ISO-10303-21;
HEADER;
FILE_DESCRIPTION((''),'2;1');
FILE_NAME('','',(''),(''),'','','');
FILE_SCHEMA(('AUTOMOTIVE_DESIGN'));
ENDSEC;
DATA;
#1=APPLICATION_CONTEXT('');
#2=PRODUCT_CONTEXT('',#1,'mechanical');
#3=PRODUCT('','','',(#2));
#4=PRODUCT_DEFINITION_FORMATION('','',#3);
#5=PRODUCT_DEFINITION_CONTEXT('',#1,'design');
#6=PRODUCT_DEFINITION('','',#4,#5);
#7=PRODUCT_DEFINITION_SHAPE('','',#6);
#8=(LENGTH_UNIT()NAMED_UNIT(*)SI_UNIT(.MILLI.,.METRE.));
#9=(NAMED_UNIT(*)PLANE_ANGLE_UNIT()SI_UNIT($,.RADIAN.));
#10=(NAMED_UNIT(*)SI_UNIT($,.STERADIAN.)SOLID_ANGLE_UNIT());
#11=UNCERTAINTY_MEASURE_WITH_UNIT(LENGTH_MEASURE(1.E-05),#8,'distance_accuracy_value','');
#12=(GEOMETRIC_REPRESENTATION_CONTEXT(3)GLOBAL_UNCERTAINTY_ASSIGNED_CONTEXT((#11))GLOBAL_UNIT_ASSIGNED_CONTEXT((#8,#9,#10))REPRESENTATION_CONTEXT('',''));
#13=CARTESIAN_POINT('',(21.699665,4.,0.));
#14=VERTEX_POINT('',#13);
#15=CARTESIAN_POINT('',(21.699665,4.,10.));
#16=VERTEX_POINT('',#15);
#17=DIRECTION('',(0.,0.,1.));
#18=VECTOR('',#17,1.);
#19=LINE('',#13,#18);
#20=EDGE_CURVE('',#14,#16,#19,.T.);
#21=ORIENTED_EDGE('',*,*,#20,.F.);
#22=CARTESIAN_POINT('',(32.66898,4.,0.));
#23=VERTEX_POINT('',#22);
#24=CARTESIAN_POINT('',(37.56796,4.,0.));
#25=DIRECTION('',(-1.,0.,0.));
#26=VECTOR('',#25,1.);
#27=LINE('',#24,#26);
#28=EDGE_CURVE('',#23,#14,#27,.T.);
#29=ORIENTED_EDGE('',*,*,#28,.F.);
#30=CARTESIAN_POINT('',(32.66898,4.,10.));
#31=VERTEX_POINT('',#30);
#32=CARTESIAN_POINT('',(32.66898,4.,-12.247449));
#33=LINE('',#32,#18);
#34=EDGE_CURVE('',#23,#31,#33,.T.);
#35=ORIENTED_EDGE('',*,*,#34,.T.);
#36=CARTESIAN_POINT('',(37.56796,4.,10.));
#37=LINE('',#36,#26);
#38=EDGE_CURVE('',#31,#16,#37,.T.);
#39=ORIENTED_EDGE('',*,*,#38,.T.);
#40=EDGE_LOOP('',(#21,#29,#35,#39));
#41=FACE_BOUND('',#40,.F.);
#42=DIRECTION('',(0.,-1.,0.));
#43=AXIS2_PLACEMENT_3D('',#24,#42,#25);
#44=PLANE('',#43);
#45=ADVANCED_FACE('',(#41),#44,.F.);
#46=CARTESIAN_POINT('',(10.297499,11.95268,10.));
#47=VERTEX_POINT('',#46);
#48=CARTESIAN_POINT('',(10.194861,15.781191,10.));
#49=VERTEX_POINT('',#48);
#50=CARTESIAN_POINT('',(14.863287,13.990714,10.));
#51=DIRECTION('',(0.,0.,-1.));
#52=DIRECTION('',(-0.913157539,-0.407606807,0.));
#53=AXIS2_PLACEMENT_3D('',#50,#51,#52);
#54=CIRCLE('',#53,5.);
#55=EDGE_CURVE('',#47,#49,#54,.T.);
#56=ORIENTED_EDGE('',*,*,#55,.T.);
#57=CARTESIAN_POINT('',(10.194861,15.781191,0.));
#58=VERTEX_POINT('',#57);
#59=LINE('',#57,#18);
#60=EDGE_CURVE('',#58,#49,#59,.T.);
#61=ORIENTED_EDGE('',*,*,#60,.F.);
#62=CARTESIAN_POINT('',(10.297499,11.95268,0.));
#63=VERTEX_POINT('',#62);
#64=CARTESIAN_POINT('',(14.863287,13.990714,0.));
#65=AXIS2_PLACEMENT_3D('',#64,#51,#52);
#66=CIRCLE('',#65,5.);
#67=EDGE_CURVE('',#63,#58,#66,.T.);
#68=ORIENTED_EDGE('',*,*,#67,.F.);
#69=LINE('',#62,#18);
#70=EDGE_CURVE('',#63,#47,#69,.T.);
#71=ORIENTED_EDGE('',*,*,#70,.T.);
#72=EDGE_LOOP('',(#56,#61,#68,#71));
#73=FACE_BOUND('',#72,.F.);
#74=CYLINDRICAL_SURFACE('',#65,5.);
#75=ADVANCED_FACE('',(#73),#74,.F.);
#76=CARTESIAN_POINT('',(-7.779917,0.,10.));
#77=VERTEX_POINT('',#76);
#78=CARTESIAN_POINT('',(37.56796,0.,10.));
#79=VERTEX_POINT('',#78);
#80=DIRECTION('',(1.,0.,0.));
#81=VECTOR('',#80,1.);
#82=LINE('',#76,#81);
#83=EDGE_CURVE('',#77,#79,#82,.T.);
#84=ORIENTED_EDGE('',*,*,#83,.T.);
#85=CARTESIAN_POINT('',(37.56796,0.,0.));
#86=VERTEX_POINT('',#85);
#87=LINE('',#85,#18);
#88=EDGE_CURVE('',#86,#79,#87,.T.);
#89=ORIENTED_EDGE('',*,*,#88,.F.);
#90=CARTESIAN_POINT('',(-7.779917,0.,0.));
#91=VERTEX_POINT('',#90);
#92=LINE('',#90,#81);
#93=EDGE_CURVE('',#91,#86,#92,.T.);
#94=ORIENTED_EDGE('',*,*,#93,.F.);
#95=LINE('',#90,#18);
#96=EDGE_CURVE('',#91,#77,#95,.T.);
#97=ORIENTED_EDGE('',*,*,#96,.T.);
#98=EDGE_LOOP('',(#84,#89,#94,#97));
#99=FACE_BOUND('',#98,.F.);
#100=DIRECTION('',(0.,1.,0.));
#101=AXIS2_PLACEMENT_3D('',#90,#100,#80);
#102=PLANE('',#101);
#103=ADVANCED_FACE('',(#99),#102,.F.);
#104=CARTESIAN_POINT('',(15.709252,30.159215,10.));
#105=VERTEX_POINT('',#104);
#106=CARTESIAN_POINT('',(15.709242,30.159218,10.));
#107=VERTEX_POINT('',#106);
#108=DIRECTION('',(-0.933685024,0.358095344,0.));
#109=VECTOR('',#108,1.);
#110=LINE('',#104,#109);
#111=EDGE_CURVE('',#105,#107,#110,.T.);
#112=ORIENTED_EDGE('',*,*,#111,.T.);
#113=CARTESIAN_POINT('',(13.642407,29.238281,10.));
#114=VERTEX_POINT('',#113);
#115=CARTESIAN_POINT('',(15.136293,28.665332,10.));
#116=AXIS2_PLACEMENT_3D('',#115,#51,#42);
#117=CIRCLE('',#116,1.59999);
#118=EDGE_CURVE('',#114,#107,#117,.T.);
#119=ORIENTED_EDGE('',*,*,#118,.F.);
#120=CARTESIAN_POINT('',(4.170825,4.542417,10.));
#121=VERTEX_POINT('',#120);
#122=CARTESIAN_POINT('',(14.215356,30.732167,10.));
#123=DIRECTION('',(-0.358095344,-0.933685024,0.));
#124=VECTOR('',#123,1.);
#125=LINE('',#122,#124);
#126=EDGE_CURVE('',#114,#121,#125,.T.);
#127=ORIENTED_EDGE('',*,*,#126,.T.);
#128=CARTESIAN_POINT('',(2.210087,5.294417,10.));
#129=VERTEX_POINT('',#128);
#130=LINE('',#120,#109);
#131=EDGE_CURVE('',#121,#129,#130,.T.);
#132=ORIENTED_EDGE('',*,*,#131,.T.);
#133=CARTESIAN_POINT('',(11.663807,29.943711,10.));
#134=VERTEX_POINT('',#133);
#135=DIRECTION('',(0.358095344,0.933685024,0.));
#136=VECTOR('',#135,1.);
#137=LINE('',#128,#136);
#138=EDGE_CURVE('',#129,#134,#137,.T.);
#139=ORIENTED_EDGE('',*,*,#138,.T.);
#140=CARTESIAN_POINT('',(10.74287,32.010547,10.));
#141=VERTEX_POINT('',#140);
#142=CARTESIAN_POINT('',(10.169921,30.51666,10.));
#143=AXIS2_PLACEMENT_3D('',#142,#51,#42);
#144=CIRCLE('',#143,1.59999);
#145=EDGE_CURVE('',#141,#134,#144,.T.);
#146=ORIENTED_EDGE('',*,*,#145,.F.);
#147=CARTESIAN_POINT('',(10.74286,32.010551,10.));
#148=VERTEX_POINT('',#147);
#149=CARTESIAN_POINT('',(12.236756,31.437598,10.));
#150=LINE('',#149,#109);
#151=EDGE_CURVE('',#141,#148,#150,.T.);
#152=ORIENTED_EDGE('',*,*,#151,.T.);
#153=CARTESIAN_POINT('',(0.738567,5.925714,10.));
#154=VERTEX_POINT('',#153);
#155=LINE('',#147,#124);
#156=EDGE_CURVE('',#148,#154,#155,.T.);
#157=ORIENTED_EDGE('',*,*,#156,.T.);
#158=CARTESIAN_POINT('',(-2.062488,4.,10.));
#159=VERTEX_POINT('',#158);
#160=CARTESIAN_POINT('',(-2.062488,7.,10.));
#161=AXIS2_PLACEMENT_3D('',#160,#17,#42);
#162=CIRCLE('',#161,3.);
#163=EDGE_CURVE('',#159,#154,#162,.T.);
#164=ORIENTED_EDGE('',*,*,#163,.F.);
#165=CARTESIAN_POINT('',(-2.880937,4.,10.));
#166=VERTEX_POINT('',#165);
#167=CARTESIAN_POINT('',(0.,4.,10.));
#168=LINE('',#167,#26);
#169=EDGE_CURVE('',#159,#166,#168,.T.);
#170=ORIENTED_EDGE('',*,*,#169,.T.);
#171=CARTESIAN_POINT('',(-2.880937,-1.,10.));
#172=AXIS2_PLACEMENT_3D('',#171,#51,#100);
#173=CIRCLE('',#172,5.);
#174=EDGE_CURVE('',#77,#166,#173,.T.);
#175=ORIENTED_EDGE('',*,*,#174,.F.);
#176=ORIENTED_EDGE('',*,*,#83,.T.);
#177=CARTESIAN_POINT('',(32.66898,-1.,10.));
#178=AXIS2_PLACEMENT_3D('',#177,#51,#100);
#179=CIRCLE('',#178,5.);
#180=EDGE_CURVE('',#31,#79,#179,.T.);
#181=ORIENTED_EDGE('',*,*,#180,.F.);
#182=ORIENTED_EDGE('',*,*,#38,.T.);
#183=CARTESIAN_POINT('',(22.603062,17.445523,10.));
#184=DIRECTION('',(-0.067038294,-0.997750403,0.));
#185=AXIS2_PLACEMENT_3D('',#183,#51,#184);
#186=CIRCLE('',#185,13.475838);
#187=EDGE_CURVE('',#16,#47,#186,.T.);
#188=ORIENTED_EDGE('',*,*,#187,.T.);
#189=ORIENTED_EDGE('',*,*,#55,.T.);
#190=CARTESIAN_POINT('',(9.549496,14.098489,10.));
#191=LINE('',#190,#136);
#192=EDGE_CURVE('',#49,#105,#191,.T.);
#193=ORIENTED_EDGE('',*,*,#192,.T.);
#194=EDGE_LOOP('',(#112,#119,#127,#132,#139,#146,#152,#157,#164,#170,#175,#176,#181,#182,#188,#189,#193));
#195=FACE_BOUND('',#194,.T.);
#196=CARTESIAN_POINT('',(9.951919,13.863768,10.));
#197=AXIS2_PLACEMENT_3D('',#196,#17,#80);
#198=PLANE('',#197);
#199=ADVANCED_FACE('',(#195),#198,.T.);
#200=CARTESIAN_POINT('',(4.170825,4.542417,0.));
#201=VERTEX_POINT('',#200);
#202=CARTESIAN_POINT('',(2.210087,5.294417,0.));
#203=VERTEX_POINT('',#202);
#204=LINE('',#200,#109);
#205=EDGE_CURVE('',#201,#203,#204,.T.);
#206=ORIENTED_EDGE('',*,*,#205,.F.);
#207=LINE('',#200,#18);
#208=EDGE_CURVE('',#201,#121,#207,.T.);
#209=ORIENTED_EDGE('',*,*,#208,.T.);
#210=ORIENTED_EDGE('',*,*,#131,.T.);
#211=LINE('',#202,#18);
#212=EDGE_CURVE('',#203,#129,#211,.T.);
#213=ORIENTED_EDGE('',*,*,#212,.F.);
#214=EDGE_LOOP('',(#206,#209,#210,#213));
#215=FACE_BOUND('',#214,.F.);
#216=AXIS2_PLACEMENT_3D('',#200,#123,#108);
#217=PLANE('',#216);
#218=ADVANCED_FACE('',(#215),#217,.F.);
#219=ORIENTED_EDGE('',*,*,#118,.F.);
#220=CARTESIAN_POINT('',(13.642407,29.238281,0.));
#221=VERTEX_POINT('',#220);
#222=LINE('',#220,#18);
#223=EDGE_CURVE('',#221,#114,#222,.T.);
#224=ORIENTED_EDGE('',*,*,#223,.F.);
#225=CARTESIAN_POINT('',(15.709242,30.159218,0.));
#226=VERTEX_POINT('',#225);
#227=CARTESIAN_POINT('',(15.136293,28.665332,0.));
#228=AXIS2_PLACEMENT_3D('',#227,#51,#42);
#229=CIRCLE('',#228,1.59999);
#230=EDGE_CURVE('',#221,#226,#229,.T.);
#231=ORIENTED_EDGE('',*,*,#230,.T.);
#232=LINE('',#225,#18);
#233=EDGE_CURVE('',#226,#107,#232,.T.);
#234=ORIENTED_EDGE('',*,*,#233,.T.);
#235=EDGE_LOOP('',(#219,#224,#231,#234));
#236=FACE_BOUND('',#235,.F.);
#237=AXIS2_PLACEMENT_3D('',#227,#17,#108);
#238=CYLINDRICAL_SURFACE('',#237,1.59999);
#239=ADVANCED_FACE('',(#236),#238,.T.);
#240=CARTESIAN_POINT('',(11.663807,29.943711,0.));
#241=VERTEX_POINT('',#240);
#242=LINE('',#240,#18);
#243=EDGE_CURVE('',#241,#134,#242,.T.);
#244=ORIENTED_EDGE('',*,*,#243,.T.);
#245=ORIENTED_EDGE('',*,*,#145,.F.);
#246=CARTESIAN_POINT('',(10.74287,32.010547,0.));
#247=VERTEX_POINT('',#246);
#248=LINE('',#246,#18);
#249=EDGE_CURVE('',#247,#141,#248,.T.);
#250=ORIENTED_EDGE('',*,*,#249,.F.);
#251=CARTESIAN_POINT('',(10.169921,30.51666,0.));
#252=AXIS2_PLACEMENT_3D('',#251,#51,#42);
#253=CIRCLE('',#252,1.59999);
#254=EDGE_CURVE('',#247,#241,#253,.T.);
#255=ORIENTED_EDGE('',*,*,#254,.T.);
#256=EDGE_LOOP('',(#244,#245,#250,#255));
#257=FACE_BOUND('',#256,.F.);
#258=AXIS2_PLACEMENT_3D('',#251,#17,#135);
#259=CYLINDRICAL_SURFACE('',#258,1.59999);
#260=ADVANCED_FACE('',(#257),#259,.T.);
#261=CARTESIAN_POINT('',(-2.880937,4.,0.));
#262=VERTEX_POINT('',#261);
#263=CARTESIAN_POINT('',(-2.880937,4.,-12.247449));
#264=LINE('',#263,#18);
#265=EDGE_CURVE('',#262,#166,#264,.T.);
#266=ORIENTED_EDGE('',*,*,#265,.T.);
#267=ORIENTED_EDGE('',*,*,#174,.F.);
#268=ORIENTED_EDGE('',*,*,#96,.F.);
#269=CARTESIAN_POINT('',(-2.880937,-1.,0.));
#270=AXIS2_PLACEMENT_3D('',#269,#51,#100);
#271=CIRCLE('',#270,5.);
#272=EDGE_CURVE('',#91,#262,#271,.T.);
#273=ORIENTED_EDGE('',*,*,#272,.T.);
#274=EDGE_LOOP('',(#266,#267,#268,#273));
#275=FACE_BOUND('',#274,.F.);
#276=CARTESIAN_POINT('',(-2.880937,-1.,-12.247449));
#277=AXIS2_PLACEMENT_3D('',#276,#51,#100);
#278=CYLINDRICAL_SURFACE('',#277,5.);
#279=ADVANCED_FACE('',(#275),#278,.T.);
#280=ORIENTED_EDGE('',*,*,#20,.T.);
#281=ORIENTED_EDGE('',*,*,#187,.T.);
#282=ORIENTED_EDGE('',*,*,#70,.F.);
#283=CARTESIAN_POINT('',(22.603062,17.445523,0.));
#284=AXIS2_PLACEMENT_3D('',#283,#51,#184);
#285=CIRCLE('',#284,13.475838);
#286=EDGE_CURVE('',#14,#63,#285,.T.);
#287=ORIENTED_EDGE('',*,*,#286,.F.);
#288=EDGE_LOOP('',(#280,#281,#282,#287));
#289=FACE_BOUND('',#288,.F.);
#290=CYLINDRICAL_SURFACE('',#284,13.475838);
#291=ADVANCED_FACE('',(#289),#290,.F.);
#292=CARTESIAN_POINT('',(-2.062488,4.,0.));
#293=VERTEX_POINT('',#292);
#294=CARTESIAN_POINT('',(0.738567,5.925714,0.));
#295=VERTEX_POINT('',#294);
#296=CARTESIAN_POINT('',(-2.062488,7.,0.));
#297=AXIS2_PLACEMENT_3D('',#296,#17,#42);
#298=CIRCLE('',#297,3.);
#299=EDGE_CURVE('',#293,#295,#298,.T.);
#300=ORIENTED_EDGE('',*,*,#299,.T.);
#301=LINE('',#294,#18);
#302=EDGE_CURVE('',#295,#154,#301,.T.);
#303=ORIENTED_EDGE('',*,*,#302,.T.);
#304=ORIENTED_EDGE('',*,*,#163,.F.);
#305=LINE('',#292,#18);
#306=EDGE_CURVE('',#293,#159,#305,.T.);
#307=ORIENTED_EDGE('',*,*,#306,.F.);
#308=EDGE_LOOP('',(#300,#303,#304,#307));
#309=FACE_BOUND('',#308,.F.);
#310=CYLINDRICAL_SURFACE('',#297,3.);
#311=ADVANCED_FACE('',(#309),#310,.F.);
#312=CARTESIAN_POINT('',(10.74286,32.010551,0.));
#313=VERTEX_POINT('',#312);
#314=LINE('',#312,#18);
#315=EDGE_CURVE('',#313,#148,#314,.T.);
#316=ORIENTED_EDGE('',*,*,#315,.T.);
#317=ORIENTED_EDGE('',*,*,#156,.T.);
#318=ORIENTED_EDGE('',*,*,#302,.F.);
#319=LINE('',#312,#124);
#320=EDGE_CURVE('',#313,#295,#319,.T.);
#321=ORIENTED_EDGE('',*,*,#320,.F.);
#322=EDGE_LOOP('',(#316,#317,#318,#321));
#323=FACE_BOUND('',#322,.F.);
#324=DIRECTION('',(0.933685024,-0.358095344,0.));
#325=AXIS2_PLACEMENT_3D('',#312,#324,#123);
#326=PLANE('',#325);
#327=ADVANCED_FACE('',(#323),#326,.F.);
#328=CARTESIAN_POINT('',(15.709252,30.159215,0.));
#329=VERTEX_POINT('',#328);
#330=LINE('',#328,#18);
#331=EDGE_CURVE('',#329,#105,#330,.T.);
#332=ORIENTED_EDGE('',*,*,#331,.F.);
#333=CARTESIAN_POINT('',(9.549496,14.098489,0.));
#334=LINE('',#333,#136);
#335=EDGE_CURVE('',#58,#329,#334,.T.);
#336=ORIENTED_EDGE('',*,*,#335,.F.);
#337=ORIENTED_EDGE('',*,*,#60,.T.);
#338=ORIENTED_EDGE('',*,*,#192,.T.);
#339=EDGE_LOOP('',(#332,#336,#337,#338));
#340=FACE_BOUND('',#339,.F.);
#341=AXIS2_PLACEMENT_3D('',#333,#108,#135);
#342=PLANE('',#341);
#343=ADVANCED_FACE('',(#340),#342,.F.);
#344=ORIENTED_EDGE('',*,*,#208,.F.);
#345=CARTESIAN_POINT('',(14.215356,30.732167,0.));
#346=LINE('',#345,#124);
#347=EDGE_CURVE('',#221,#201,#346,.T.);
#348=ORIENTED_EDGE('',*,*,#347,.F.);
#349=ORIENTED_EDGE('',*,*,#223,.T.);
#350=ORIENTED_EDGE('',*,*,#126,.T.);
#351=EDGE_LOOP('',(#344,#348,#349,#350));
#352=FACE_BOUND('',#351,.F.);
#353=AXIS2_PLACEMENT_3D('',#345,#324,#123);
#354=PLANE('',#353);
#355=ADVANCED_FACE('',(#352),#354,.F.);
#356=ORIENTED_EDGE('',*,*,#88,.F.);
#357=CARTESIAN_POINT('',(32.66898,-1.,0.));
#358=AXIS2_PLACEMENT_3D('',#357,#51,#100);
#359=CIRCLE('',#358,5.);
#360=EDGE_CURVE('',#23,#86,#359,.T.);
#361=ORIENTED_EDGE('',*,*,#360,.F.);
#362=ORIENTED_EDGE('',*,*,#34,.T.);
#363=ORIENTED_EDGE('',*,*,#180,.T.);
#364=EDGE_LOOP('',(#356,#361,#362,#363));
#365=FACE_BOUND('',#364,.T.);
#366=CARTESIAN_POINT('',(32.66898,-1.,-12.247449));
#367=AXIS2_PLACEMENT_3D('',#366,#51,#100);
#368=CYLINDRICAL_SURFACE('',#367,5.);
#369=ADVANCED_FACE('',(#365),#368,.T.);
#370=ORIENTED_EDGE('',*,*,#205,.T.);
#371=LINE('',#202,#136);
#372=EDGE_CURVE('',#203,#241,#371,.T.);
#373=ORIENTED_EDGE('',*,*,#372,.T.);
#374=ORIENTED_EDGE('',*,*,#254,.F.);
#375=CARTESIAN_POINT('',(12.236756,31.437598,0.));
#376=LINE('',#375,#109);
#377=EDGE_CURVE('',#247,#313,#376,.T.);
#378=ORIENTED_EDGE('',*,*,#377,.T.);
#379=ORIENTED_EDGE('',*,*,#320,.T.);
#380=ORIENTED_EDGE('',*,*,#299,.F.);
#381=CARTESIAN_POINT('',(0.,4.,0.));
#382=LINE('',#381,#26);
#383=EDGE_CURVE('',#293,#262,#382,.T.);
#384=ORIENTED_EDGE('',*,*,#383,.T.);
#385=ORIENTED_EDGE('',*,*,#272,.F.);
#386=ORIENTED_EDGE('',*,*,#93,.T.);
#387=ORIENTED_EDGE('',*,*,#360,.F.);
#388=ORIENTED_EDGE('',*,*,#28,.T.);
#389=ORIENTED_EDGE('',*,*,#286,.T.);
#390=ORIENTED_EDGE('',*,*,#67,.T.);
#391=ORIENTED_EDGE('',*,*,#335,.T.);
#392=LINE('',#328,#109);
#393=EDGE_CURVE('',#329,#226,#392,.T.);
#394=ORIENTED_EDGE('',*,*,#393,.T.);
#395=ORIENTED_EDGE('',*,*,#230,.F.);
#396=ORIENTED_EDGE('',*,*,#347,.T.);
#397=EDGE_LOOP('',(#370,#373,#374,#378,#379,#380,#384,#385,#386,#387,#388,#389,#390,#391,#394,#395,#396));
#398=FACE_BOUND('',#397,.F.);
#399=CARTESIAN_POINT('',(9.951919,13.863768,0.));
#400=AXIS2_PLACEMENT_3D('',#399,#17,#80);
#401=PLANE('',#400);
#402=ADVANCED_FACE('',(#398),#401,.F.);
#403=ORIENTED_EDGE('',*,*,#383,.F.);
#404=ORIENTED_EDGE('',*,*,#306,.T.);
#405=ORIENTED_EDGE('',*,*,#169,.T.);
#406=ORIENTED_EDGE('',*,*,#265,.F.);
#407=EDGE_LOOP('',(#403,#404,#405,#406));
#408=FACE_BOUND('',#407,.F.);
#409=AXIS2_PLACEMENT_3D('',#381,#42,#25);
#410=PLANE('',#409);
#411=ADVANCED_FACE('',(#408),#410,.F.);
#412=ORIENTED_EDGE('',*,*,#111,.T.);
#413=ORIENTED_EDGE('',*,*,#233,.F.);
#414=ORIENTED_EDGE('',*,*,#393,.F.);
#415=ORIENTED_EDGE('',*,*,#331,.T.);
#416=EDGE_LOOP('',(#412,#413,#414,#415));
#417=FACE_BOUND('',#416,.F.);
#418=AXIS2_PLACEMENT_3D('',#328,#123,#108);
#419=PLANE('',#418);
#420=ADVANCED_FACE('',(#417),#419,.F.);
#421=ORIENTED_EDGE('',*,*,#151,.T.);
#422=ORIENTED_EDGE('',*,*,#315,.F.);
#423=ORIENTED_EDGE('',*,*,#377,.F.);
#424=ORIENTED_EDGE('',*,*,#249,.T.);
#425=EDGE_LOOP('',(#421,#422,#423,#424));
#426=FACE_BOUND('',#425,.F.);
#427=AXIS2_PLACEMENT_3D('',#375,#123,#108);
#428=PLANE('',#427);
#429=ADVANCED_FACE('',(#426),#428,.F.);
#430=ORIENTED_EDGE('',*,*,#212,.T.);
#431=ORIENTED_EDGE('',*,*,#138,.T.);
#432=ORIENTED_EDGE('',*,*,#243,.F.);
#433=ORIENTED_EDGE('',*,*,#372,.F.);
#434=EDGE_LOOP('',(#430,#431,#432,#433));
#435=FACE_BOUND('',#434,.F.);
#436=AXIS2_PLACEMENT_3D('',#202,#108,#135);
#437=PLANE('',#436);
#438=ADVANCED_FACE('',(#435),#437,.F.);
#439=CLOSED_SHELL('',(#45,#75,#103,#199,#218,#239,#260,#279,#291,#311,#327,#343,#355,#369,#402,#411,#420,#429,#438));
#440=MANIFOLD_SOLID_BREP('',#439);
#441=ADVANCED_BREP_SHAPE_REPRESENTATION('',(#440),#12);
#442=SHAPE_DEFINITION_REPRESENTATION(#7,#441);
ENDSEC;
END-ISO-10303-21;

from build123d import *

# Parameters (mm, degrees)
F1_DEPTH    = 10
F2_T1_DEPTH = 10
F2_T3_DEPTH = 34.4948974279
F2_T5_DEPTH = 34.4948974279
F3_R        = 3
F4_R        = 1.59999


# Not quite as in the source:
# - a fillet or chamfer that OpenCascade refuses, or shapes differently, is made with other operations: its cross-section is extruded or revolved along the edge and cut away or added
# - a fillet or chamfer is up to 0.001 mm smaller than in the source, because OpenCascade refuses the exact size


with BuildPart() as f1:
    # F0 (on Top) → F1 (new body)
    with BuildSketch(Plane.XY):
        with BuildLine():
            Line((-7.7799167484, 4), (-7.7799167484, 0))
            Line((-7.7799167484, 0), (37.5679595768, 0))
            Line((37.5679595768, 0), (37.5679595768, 4))
            Line((37.5679595768, 4), (21.6996651143, 4))
            ThreePointArc((21.6996651143, 4), (13.9894641382, 7.0819259987), (9.5494964602, 14.0984888306))
            Line((9.5494964602, 14.0984888306), (15.7092516907, 30.1592148483))
            Line((15.7092516907, 30.1592148483), (14.215355652, 30.732167399))
            Line((14.215355652, 30.732167399), (4.170825278, 4.5424172749))
            Line((4.170825278, 4.5424172749), (2.2100867272, 5.2944174977))
            Line((2.2100867272, 5.2944174977), (12.2367563651, 31.4375981759))
            Line((12.2367563651, 31.4375981759), (10.7428603263, 32.0105507266))
            Line((10.7428603263, 32.0105507266), (0, 4))
            Line((0, 4), (-7.7799167484, 4))
        make_face()
    extrude(amount=F1_DEPTH)

    # F2: fillet of radius 5 on 3 edges, made by hand

    # F2_s2 → F2_t1 (join)
    with BuildSketch(Plane.XY):
        with BuildLine():
            ThreePointArc((10.2974988853, 11.9526797446), (9.8650823787, 13.8567183835), (10.1948614585, 15.7811905013))
            Line((10.1948614585, 15.7811905013), (9.5494964602, 14.0984888306))
            ThreePointArc((9.5494964602, 14.0984888306), (9.8781857469, 13.0097891124), (10.2974988853, 11.9526797446))
        make_face()
    extrude(amount=F2_T1_DEPTH)

    # F2_s4 → F2_t3 (cut)
    with BuildSketch(Plane.XY.offset(-12.2474487139)):
        with BuildLine():
            ThreePointArc((-2.8809372628, 4), (-6.043214923, 2.8729833462), (-7.7799167484, 0))
            Line((-7.7799167484, 0), (-7.7799167484, 4))
            Line((-7.7799167484, 4), (-2.8809372628, 4))
        make_face()
    extrude(amount=F2_T3_DEPTH, mode=Mode.SUBTRACT)

    # F2_s6 → F2_t5 (cut)
    with BuildSketch(Plane.XY.offset(-12.2474487139)):
        with BuildLine():
            ThreePointArc((32.6689800913, 4), (35.8312577514, 2.8729833462), (37.5679595768, 0))
            Line((37.5679595768, 0), (37.5679595768, 4))
            Line((37.5679595768, 4), (32.6689800913, 4))
        make_face()
    extrude(amount=F2_T5_DEPTH, mode=Mode.SUBTRACT)

    # F3
    f3_edges = [f1.edges().sort_by_distance(p)[0] for p in [
        (0, 4, 5),
    ]]
    fillet(f3_edges, radius=F3_R)

    # F4 (radius 1.6 in the source; OpenCascade refuses exactly that, so slightly less here)
    f4_edges = [f1.edges().sort_by_distance(p)[0] for p in [
        (12.236756, 31.437598, 5),
        (14.215356, 30.732167, 5),
    ]]
    fillet(f4_edges, radius=F4_R)


solid = f1.part
